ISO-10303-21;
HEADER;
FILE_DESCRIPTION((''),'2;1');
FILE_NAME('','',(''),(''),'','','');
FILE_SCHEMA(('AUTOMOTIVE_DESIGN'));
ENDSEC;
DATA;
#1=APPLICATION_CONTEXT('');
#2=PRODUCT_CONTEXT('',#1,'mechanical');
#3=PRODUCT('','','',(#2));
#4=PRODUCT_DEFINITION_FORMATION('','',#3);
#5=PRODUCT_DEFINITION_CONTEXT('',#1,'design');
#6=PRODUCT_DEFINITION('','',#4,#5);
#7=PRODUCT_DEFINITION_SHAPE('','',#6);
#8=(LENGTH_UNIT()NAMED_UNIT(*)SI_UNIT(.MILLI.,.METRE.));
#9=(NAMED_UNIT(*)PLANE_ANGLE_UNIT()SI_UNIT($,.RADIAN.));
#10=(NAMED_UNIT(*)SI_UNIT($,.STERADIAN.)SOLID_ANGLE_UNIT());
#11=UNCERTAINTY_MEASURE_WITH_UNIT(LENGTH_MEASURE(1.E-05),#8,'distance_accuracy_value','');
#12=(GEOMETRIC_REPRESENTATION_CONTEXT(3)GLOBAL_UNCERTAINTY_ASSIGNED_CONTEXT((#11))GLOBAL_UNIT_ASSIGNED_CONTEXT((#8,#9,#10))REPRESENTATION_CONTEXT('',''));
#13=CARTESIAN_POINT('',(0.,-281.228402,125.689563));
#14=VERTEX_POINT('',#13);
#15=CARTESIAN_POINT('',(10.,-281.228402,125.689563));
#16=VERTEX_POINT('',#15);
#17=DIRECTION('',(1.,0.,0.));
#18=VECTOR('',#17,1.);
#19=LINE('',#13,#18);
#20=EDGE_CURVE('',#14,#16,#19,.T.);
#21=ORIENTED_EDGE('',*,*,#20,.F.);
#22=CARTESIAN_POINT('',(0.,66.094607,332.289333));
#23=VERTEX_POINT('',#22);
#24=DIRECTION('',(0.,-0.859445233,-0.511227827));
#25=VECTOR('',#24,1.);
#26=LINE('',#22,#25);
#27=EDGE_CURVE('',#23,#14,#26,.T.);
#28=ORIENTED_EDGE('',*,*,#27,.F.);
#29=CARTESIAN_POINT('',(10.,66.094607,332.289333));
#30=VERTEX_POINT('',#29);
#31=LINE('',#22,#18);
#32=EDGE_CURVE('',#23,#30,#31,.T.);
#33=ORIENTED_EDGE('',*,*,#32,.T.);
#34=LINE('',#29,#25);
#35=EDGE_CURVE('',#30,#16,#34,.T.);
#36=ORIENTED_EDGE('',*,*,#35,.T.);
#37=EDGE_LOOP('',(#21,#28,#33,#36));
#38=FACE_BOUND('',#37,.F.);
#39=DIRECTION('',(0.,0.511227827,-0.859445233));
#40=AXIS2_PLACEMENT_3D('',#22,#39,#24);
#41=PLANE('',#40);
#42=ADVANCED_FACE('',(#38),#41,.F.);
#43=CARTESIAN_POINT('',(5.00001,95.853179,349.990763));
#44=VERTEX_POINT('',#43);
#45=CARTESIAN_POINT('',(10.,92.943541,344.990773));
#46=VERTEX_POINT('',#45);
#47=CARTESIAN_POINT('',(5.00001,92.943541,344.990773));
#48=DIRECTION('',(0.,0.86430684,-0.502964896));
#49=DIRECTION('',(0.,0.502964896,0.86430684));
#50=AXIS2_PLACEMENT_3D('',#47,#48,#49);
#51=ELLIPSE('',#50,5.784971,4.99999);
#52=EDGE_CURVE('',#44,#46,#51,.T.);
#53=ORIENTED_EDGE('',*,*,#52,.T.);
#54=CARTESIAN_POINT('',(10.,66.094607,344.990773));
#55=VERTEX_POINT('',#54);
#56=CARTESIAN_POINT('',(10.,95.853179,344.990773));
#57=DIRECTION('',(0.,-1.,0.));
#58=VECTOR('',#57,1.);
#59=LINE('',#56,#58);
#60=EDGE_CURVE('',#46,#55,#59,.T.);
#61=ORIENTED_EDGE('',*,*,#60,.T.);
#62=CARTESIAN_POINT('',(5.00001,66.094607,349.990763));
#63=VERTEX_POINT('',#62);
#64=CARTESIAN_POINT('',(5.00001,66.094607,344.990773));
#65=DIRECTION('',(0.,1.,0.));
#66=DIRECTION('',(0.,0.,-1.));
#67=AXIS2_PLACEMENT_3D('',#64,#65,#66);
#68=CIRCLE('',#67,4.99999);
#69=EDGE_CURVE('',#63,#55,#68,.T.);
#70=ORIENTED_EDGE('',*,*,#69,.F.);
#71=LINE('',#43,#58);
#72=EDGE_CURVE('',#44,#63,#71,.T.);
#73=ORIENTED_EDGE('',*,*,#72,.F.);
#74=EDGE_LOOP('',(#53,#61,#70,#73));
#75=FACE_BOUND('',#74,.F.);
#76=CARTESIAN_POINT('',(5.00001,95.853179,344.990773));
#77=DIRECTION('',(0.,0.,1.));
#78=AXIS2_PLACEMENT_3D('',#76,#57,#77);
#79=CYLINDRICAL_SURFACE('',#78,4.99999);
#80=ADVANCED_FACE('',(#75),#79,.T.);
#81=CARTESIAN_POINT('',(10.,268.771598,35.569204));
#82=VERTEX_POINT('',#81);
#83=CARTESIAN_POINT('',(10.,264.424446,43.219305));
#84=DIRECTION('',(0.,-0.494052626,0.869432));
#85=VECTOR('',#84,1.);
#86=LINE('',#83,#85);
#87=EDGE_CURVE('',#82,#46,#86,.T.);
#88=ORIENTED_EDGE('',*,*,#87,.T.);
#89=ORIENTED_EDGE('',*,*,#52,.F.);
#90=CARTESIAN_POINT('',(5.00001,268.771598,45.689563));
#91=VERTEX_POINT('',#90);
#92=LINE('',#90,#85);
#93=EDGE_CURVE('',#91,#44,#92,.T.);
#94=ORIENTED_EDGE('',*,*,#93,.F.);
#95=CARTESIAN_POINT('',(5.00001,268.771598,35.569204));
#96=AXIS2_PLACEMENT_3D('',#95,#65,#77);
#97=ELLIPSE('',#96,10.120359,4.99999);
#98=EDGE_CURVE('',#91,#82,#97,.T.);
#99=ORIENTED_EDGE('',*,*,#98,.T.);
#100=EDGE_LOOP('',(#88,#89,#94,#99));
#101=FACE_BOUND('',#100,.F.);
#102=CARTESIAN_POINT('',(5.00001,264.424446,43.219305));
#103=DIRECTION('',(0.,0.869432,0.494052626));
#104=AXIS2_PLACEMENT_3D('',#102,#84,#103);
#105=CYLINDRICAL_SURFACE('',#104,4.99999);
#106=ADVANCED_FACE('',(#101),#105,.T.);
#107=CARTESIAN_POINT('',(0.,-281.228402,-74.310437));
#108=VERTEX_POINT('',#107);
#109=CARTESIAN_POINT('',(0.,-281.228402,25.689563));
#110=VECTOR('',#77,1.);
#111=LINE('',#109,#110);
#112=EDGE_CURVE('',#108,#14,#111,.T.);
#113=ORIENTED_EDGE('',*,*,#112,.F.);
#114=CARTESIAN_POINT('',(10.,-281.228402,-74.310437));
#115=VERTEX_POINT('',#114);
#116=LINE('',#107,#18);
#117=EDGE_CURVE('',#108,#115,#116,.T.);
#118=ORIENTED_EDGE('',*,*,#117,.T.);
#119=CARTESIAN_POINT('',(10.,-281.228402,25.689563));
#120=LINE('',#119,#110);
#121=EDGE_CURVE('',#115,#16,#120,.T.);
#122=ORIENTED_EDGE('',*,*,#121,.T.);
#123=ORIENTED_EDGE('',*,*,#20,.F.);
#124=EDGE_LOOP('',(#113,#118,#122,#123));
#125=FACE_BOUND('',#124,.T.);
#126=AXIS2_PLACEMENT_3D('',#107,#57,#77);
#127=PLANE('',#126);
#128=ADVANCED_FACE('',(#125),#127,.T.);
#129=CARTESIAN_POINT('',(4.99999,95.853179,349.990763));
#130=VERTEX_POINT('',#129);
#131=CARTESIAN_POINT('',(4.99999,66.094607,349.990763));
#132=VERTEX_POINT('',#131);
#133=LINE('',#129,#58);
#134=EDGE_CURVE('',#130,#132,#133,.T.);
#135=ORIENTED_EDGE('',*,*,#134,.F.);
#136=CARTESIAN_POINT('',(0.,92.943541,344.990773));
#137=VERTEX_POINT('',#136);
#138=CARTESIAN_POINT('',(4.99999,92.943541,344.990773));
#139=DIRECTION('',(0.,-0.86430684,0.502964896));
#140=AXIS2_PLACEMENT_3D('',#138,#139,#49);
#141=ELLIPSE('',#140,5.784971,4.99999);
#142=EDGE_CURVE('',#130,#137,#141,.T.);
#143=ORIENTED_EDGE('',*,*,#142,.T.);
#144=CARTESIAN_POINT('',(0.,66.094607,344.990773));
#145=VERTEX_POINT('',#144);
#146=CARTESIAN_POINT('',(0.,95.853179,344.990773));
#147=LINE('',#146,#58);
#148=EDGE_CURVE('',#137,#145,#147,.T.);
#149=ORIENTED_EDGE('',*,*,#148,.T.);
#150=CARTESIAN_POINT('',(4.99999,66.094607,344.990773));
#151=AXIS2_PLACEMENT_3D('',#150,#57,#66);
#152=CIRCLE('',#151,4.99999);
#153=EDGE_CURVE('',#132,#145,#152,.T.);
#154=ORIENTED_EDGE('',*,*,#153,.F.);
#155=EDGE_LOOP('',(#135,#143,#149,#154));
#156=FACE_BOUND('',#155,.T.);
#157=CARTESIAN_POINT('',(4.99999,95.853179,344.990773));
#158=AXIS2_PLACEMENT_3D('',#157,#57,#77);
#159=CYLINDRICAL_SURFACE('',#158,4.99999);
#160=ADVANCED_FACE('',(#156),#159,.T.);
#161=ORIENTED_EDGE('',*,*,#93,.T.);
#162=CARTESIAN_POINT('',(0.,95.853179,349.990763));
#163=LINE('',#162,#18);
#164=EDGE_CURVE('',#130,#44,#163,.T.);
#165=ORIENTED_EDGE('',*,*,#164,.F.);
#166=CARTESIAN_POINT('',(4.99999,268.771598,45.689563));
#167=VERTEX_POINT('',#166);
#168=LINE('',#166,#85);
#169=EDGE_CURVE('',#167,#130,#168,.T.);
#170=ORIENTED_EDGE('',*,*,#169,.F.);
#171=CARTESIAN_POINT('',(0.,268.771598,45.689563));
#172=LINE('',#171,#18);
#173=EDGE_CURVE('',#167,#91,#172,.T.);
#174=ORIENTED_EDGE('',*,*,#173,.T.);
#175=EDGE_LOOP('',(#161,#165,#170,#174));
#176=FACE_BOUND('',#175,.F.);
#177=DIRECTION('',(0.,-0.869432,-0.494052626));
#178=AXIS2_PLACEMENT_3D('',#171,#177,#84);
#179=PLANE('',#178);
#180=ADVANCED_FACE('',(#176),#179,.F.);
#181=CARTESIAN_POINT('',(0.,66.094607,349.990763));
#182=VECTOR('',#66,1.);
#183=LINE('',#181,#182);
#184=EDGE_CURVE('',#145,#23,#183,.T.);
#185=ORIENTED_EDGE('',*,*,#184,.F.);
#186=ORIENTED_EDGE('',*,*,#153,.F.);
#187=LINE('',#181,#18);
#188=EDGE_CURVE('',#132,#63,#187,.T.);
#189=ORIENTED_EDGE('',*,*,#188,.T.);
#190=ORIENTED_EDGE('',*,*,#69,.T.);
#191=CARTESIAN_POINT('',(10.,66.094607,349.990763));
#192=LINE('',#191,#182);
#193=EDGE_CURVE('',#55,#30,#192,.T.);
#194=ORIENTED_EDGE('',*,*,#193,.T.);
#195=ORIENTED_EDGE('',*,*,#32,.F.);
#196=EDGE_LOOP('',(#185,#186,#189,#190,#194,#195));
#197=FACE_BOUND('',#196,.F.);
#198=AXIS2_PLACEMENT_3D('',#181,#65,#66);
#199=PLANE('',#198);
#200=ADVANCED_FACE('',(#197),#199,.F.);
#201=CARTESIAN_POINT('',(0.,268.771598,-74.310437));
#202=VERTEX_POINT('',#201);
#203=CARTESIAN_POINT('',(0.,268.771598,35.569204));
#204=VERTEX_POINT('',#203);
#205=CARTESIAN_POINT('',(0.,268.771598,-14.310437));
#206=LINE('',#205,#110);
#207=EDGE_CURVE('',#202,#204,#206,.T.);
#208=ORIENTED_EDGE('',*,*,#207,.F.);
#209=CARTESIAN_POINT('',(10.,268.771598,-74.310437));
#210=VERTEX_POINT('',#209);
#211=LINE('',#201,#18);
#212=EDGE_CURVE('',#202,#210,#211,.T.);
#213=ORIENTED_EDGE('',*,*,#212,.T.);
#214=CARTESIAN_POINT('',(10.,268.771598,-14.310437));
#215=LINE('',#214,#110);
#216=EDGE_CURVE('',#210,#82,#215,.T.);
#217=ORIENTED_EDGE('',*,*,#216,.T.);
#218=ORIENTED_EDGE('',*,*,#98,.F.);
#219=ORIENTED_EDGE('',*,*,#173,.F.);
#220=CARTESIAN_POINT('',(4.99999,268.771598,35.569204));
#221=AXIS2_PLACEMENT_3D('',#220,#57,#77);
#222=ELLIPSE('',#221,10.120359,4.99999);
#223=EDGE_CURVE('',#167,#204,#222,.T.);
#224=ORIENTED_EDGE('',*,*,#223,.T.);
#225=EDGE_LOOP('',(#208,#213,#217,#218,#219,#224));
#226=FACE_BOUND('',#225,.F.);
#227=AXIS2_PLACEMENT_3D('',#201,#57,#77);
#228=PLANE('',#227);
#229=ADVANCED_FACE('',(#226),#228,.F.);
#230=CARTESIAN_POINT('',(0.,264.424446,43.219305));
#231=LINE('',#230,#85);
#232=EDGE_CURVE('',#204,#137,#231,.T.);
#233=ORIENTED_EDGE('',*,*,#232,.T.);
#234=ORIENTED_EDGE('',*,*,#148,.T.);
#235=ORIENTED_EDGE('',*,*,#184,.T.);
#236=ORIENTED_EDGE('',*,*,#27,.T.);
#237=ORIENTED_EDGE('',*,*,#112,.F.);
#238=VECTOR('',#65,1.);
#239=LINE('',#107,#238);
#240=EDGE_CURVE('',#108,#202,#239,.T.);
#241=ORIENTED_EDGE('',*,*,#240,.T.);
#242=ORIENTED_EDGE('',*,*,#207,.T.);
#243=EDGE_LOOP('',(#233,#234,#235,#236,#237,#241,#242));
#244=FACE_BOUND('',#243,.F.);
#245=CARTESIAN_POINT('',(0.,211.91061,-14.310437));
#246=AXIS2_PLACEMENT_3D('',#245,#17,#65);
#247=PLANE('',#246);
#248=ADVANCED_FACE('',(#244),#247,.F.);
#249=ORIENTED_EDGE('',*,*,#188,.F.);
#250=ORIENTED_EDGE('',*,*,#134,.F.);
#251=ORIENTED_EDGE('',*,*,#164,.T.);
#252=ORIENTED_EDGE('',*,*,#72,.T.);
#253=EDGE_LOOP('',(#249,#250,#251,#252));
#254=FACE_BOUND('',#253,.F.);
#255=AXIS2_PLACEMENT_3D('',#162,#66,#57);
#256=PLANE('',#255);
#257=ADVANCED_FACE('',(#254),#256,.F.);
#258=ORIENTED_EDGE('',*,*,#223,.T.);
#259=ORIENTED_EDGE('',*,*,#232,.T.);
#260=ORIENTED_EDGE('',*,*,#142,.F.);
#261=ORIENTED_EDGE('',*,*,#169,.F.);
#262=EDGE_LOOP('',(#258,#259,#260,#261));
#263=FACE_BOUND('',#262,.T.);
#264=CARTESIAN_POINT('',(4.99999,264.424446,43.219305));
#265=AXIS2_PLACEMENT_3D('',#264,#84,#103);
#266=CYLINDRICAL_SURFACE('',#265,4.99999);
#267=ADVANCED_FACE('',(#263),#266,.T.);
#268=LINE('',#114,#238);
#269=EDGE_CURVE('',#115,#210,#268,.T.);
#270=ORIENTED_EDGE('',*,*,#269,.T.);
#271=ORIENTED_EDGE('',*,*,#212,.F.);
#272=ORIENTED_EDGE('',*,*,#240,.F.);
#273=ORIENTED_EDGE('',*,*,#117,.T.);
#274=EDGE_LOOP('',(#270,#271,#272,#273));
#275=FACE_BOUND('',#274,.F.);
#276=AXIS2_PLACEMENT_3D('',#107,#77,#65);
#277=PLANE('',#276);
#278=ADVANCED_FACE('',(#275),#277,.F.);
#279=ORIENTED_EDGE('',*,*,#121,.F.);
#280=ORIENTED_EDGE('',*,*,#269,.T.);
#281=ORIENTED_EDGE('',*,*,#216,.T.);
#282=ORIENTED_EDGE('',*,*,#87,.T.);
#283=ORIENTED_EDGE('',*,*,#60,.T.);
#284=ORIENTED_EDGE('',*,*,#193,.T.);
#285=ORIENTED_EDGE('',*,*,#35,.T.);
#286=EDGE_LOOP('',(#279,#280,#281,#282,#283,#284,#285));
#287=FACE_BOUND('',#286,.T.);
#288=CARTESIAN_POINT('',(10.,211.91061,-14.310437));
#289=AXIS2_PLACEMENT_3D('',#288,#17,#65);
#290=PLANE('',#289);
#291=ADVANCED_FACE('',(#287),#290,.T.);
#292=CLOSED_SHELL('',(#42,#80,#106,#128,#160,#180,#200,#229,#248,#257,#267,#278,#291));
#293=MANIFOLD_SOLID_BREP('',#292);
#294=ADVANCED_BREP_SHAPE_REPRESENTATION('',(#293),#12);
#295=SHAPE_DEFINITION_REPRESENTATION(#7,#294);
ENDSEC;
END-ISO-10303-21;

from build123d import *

# Parameters (mm, degrees)
F0_W     = 113.7219756842
F0_H     = 120
F0_W_2   = 107.0308029652
F0_H_2   = 200
F1_DEPTH = 10
F2_R     = 4.99999


# Not quite as in the source:
# - a fillet or chamfer is up to 0.001 mm smaller than in the source, because OpenCascade refuses the exact size


with BuildPart() as f1:
    # F0 (on Right) → F1 (new body)
    with BuildSketch(Plane.YZ):
        with Locations((211.910609901, -14.3104368448)):
            Rectangle(F0_W, F0_H)
        Polygon((95.8531785295, -74.3104368448), (155.0496220589, -74.3104368448), (155.0496220589, 45.6895631552), (268.771597743, 45.6895631552), (95.8531785295, 349.9907631145), align=None)
        Polygon((66.0946071148, -74.3104368448), (95.8531785295, -74.3104368448), (95.8531785295, 349.9907631145), (66.0946071148, 332.2893329267), align=None)
        Polygon((66.0946071148, 332.2893329267), (95.8531785295, 349.9907631145), (66.0946071148, 349.9907631145), align=None)
        Polygon((-174.1975992918, -74.3104368448), (66.0946071148, -74.3104368448), (66.0946071148, 332.2893329267), (-281.228402257, 125.6895631552), (-174.1975992918, 125.6895631552), align=None)
        with Locations((-227.7130007744, 25.6895631552)):
            Rectangle(F0_W_2, F0_H_2)
    extrude(amount=F1_DEPTH)

    # F2 (radius 5 in the source; OpenCascade refuses exactly that, so slightly less here)
    f2_edges = [f1.edges().sort_by_distance(p)[0] for p in [
        (10, 182.312388, 197.840163),
        (0, 182.312388, 197.840163),
        (10, 80.973893, 349.990763),
        (0, 80.973893, 349.990763),
    ]]
    fillet(f2_edges, radius=F2_R)


solid = f1.part
